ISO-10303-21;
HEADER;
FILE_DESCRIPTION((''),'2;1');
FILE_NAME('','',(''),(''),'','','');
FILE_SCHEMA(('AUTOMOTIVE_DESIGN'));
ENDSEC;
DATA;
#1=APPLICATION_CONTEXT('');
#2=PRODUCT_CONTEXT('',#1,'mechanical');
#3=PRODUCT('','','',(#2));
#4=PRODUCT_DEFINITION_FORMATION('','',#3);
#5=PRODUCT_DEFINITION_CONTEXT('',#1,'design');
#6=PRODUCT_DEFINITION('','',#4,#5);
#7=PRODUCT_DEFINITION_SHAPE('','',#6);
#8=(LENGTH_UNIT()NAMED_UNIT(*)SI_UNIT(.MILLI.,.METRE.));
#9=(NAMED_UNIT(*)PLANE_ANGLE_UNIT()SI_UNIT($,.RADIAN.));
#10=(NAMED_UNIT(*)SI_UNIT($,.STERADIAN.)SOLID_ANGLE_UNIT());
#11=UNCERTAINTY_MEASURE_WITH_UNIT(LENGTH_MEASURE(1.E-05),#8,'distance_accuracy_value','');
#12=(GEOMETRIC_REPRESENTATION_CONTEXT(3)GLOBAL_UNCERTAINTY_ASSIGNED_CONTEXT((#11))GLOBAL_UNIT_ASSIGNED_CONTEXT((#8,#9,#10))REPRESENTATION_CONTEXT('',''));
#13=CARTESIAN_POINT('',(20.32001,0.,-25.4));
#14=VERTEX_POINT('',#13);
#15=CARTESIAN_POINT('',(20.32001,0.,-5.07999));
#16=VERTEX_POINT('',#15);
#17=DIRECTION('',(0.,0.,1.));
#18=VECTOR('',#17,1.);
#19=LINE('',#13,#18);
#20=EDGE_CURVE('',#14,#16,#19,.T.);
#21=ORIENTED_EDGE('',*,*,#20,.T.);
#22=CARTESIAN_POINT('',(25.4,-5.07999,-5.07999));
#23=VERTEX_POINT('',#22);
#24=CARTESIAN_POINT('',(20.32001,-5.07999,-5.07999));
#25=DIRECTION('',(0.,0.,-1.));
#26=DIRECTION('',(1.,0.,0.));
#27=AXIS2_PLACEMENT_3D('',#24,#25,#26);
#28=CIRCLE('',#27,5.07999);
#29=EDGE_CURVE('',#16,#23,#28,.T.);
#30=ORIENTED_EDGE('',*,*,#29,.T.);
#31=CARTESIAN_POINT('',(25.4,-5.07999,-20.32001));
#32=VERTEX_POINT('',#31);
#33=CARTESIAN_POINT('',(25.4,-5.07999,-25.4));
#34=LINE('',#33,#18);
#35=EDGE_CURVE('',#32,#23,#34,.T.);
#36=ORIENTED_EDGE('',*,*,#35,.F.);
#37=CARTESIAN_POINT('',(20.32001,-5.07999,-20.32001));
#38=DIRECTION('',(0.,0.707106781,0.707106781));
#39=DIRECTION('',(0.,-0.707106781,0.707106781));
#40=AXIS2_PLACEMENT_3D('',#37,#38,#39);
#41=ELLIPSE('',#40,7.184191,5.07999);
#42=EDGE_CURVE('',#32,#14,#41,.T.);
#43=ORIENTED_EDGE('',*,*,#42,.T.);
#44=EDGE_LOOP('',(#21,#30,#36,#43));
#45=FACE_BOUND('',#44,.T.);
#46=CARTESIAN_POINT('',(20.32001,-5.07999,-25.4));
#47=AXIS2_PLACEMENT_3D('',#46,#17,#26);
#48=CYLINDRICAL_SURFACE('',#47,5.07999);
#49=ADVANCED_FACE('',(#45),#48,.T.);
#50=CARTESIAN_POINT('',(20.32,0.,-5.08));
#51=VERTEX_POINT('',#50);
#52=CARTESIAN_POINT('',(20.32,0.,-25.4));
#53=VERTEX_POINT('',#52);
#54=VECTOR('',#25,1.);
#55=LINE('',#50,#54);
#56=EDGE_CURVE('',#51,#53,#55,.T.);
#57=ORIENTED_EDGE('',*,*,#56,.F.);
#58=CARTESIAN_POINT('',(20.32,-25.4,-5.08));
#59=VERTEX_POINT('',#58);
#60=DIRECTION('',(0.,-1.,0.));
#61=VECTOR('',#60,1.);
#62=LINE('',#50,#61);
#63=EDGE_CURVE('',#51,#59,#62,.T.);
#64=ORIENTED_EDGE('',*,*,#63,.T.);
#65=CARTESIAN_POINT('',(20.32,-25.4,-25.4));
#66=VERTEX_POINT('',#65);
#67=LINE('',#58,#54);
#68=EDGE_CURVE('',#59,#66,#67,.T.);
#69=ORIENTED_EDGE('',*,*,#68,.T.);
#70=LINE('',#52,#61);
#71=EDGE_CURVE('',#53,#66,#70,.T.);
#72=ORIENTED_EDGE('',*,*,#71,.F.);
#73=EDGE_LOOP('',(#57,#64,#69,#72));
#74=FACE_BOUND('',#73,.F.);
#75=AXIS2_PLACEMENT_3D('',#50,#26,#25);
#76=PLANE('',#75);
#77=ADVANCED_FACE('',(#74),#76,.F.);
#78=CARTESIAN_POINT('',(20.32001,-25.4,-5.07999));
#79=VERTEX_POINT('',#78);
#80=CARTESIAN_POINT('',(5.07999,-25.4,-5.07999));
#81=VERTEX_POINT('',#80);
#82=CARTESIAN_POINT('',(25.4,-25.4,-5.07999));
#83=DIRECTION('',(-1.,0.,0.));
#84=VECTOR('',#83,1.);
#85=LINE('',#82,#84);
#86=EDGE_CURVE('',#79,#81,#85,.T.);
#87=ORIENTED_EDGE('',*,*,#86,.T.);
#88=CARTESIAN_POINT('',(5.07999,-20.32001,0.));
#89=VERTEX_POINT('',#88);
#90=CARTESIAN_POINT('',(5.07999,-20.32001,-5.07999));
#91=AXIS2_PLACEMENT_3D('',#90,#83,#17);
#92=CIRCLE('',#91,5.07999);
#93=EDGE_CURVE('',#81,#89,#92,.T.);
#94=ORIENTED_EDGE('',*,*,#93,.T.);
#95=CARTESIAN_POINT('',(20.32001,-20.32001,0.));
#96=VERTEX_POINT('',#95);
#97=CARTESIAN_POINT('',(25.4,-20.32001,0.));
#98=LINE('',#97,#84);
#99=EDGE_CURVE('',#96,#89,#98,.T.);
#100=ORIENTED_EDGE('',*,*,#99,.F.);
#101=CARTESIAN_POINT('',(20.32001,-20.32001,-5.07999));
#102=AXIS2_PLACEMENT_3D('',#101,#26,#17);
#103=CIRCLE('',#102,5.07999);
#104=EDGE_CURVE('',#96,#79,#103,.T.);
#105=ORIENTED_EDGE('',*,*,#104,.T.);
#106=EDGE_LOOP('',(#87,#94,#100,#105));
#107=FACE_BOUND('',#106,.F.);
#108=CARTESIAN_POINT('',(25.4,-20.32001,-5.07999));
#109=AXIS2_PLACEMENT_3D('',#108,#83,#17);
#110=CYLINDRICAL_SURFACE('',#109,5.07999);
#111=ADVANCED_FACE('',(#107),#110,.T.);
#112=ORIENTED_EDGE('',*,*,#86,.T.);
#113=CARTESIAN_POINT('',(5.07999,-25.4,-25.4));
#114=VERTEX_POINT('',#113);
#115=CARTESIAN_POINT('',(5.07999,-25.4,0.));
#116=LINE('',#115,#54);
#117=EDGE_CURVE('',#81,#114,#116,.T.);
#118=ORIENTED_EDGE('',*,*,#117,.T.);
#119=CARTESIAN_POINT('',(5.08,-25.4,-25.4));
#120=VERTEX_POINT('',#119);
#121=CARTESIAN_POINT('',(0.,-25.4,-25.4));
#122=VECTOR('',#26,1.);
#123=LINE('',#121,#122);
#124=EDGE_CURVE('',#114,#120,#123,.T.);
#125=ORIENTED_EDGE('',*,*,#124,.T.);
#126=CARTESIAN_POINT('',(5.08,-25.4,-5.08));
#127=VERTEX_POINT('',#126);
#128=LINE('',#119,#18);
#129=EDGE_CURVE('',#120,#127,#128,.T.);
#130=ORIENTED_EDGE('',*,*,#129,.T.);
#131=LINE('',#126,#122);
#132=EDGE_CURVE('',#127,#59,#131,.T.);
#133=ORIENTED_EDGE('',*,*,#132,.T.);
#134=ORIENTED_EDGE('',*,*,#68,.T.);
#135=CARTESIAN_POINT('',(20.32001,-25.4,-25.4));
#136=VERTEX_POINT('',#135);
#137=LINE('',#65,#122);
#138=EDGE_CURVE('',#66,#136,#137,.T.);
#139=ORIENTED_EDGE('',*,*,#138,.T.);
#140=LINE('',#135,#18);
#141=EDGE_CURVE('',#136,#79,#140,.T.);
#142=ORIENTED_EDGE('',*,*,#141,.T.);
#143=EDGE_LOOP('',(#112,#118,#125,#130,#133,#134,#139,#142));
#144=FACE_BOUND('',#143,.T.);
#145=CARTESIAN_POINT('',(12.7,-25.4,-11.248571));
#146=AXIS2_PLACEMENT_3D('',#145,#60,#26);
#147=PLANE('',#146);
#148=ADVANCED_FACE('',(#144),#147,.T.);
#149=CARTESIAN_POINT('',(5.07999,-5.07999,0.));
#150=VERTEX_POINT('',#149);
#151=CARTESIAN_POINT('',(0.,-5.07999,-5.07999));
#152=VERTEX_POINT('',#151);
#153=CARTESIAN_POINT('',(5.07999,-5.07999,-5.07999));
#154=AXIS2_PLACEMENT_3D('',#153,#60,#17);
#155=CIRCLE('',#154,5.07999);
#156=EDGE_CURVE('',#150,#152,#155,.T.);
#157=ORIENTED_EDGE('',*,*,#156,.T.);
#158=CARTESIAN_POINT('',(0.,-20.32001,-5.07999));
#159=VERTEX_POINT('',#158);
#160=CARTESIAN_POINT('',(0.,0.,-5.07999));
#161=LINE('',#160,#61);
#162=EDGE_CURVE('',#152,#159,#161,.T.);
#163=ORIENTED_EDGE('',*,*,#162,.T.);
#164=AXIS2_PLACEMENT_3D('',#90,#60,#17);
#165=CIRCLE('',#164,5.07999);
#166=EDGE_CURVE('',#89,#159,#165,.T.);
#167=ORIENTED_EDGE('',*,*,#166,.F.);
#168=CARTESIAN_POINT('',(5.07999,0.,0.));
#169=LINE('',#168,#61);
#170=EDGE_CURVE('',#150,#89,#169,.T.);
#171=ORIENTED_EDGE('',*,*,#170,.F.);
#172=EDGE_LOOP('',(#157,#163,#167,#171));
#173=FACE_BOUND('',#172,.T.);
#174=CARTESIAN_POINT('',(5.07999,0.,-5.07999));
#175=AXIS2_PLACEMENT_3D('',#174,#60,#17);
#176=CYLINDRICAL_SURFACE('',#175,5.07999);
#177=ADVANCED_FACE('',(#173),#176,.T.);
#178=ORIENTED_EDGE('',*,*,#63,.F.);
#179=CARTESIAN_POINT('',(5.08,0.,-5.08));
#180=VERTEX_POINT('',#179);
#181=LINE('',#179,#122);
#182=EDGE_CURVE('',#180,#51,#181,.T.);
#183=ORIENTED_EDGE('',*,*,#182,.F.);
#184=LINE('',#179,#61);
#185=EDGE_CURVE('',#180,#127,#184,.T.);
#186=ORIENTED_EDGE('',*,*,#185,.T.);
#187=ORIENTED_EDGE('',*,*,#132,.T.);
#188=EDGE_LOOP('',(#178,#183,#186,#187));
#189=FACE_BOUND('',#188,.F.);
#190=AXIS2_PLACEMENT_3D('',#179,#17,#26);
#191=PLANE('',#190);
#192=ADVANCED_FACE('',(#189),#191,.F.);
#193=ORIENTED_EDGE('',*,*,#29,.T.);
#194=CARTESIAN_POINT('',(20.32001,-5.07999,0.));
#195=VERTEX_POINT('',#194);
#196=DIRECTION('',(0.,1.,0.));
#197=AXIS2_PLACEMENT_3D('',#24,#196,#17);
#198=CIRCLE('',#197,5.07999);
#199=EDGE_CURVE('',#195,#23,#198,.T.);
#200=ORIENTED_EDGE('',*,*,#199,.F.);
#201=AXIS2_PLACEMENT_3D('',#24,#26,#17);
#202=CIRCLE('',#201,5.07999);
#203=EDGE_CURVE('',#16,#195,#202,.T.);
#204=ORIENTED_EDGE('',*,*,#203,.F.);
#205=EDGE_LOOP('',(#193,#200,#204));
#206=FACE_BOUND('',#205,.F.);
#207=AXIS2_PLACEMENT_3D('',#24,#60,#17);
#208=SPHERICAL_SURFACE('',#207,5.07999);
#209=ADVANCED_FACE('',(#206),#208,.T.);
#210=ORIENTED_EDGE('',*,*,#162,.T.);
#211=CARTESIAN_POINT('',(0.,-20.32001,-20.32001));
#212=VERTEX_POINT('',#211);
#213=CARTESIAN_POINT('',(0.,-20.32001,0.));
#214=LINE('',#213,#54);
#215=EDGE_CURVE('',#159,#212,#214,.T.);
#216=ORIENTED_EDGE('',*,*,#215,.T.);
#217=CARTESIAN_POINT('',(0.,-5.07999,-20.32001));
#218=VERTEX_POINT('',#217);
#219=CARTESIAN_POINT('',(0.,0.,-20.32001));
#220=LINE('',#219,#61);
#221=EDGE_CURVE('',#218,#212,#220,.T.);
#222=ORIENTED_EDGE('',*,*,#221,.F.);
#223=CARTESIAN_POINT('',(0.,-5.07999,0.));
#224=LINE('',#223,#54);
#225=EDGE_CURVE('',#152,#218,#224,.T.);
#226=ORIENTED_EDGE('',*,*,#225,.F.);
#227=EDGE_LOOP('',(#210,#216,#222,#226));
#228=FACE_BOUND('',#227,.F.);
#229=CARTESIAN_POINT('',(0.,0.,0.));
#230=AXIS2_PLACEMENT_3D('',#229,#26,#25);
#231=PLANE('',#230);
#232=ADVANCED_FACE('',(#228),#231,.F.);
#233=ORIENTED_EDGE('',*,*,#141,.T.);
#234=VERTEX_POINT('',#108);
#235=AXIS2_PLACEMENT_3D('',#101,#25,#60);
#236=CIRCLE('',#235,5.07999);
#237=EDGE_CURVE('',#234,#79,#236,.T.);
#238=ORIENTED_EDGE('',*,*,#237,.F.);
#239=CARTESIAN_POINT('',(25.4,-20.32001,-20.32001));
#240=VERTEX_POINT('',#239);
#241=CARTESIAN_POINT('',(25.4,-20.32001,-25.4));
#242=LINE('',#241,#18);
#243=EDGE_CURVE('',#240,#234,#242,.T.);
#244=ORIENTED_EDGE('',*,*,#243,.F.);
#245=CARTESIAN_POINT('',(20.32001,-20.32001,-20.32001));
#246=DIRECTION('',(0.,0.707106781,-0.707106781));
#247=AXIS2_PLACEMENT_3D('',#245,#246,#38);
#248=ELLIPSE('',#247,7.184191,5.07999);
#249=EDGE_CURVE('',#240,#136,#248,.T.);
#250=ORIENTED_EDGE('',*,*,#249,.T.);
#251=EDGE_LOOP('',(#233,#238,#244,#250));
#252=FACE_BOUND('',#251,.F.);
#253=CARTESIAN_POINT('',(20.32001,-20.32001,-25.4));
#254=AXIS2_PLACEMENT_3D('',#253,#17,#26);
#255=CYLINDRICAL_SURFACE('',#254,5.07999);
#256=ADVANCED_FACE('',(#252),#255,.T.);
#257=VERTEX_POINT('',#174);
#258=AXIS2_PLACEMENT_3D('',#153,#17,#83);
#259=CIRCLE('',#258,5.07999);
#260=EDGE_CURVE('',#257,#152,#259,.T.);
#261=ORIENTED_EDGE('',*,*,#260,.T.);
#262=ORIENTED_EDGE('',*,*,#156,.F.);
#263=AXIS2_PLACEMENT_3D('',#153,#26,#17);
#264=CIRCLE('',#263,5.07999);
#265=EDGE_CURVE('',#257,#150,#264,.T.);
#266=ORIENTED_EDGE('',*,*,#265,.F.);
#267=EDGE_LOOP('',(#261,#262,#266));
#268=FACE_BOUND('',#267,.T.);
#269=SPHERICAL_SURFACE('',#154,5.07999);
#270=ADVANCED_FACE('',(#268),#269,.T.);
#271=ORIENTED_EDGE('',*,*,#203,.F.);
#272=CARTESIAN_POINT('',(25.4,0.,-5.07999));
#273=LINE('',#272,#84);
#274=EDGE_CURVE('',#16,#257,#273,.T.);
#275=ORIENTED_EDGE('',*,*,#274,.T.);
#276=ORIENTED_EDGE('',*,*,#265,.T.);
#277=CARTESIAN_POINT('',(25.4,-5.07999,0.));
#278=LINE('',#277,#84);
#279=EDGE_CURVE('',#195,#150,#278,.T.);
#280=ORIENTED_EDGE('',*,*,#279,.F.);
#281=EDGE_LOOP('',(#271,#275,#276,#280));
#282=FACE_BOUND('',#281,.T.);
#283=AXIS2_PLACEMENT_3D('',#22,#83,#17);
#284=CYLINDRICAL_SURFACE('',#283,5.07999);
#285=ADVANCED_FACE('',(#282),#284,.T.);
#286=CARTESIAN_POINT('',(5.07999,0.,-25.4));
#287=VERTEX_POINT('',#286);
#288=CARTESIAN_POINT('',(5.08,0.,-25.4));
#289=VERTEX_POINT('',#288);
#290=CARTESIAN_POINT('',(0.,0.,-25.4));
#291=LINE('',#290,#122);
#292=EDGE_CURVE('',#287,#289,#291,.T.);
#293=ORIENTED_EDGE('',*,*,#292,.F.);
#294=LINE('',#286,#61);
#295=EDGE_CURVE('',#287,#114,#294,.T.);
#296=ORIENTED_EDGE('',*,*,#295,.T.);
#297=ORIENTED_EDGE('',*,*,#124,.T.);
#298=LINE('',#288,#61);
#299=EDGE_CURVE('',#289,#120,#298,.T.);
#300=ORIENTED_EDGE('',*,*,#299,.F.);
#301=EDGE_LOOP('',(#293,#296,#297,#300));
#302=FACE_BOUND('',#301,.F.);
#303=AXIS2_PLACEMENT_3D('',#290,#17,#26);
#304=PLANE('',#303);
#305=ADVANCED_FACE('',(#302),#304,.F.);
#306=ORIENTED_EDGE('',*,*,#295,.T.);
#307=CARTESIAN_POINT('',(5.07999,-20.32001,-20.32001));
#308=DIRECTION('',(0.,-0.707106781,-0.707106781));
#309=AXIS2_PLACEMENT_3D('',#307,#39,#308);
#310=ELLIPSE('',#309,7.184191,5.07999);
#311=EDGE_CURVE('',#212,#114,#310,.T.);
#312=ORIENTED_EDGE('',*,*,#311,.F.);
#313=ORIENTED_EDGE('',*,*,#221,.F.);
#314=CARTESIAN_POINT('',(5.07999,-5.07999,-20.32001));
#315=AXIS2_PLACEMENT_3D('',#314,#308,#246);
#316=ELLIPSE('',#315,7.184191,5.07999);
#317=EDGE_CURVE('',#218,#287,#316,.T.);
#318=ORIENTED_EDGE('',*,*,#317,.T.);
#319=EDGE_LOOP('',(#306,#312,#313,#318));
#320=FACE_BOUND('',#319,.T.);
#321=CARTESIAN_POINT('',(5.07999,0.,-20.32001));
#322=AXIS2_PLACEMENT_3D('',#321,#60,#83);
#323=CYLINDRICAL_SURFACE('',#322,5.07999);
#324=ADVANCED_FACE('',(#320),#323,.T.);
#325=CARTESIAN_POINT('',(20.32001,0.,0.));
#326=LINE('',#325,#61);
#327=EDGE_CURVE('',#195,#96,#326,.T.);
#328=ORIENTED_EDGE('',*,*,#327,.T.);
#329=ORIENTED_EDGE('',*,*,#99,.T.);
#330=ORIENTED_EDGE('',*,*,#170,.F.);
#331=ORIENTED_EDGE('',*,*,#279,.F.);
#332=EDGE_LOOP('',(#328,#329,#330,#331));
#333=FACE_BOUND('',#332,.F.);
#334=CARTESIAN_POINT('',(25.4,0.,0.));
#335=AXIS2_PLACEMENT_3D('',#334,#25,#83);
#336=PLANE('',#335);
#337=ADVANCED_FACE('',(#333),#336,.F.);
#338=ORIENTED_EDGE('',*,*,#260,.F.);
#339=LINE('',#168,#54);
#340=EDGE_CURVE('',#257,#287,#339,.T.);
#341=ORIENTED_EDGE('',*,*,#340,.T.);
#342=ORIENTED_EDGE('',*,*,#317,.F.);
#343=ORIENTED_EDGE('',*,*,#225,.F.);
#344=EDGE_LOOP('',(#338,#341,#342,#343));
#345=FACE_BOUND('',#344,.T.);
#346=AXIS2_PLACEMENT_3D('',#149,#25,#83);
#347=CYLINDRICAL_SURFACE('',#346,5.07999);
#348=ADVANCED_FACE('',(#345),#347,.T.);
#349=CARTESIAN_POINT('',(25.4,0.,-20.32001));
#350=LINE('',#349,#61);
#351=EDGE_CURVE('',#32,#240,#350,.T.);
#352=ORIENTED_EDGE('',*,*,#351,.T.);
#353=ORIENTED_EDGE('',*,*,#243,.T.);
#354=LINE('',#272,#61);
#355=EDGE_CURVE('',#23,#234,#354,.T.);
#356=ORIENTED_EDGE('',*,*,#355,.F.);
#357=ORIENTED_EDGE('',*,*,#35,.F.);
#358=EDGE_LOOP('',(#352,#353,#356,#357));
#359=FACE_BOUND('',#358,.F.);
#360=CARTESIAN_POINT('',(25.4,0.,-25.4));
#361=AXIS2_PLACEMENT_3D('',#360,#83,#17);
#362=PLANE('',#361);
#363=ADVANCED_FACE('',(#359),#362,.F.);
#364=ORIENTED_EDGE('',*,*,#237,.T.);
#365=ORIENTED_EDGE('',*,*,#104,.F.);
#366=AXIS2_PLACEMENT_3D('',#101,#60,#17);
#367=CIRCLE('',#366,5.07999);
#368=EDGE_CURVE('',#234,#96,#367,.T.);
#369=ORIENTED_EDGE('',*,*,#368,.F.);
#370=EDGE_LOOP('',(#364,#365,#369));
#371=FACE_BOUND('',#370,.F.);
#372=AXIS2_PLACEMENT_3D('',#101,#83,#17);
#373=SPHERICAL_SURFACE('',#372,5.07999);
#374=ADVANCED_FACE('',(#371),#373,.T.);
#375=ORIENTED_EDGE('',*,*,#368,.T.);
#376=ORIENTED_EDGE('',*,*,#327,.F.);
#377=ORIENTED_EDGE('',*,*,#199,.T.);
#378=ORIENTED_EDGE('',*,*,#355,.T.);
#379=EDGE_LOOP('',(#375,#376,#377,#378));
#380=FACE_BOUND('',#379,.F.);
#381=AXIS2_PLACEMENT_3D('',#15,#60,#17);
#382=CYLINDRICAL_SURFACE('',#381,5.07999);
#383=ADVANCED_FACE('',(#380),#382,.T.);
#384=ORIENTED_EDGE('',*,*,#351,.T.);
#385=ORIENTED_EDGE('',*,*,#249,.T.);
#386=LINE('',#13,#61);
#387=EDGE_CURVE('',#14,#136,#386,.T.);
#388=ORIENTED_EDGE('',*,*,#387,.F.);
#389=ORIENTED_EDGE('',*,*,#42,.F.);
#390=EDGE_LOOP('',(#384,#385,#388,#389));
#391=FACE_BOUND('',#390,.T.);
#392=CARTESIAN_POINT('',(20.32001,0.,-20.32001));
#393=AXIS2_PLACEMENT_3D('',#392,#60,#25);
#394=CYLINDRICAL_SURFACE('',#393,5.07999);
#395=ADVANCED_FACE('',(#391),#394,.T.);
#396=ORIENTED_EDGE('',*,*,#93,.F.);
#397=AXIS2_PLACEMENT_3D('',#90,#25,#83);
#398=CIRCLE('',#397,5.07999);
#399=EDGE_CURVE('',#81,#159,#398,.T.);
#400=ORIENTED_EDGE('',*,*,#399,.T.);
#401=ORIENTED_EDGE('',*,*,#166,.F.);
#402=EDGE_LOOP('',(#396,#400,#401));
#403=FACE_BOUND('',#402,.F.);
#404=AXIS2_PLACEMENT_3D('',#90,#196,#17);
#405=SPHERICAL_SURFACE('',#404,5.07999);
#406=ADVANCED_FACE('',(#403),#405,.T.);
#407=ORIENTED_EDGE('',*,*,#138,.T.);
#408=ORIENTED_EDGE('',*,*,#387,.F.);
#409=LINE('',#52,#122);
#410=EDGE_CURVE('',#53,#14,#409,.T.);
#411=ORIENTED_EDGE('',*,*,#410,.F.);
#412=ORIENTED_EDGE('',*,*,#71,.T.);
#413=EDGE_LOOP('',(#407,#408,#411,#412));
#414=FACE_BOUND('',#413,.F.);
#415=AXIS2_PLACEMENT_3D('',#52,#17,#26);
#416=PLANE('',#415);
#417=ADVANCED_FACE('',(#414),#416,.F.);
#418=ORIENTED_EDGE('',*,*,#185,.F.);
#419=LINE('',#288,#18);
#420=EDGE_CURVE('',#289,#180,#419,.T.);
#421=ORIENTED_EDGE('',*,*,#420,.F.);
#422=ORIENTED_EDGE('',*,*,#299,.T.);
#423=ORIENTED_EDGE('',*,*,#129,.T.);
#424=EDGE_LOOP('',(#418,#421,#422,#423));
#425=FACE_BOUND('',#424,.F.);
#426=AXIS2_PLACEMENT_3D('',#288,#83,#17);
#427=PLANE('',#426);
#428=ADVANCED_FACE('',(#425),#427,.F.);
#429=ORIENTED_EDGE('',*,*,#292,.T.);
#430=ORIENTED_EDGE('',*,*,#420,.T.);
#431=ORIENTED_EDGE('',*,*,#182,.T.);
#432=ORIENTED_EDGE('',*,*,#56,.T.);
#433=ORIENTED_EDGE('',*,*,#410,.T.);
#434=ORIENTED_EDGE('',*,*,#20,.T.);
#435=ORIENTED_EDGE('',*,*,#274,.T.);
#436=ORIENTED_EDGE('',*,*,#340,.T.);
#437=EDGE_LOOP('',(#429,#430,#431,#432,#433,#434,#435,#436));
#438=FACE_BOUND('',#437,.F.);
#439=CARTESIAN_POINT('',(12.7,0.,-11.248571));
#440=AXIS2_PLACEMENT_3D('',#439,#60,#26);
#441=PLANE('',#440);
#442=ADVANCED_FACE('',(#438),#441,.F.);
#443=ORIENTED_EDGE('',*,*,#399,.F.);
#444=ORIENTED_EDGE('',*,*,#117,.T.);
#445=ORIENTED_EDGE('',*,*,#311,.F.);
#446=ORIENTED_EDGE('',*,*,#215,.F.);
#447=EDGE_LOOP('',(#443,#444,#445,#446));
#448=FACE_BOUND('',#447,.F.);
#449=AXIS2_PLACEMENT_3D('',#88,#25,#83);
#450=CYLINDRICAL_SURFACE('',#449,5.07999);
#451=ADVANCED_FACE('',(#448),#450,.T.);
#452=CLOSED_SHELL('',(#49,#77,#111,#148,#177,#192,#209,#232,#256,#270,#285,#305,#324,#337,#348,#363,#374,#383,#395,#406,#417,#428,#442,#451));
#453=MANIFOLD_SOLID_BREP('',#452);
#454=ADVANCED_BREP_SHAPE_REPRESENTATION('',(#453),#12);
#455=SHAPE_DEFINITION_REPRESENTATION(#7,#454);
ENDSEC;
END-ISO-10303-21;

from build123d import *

# Parameters (mm, degrees)
F1_DEPTH = 25.4
F2_R     = 5.07999


# Not quite as in the source:
# - a fillet or chamfer is up to 0.001 mm smaller than in the source, because OpenCascade refuses the exact size


with BuildPart() as f1:
    # F0 (on Front) → F1 (new body)
    with BuildSketch(Plane.XZ):
        Polygon((25.4, 0), (0, 0), (0, -25.4), (5.08, -25.4), (5.08, -5.08), (20.32, -5.08), (20.32, -25.4), (25.4, -25.4), align=None)
    extrude(amount=F1_DEPTH)

    # F2 (radius 5.08 in the source; OpenCascade refuses exactly that, so slightly less here)
    f2_edges = [f1.edges().sort_by_distance(p)[0] for p in [
        (0, -12.7, 0),
        (12.7, -25.4, 0),
        (25.4, -12.7, 0),
        (12.7, 0, 0),
        (0, -25.4, -12.7),
        (0, 0, -12.7),
        (25.4, 0, -12.7),
        (25.4, -25.4, -12.7),
        (0, -12.7, -25.4),
        (25.4, -12.7, -25.4),
    ]]
    fillet(f2_edges, radius=F2_R)


solid = f1.part
